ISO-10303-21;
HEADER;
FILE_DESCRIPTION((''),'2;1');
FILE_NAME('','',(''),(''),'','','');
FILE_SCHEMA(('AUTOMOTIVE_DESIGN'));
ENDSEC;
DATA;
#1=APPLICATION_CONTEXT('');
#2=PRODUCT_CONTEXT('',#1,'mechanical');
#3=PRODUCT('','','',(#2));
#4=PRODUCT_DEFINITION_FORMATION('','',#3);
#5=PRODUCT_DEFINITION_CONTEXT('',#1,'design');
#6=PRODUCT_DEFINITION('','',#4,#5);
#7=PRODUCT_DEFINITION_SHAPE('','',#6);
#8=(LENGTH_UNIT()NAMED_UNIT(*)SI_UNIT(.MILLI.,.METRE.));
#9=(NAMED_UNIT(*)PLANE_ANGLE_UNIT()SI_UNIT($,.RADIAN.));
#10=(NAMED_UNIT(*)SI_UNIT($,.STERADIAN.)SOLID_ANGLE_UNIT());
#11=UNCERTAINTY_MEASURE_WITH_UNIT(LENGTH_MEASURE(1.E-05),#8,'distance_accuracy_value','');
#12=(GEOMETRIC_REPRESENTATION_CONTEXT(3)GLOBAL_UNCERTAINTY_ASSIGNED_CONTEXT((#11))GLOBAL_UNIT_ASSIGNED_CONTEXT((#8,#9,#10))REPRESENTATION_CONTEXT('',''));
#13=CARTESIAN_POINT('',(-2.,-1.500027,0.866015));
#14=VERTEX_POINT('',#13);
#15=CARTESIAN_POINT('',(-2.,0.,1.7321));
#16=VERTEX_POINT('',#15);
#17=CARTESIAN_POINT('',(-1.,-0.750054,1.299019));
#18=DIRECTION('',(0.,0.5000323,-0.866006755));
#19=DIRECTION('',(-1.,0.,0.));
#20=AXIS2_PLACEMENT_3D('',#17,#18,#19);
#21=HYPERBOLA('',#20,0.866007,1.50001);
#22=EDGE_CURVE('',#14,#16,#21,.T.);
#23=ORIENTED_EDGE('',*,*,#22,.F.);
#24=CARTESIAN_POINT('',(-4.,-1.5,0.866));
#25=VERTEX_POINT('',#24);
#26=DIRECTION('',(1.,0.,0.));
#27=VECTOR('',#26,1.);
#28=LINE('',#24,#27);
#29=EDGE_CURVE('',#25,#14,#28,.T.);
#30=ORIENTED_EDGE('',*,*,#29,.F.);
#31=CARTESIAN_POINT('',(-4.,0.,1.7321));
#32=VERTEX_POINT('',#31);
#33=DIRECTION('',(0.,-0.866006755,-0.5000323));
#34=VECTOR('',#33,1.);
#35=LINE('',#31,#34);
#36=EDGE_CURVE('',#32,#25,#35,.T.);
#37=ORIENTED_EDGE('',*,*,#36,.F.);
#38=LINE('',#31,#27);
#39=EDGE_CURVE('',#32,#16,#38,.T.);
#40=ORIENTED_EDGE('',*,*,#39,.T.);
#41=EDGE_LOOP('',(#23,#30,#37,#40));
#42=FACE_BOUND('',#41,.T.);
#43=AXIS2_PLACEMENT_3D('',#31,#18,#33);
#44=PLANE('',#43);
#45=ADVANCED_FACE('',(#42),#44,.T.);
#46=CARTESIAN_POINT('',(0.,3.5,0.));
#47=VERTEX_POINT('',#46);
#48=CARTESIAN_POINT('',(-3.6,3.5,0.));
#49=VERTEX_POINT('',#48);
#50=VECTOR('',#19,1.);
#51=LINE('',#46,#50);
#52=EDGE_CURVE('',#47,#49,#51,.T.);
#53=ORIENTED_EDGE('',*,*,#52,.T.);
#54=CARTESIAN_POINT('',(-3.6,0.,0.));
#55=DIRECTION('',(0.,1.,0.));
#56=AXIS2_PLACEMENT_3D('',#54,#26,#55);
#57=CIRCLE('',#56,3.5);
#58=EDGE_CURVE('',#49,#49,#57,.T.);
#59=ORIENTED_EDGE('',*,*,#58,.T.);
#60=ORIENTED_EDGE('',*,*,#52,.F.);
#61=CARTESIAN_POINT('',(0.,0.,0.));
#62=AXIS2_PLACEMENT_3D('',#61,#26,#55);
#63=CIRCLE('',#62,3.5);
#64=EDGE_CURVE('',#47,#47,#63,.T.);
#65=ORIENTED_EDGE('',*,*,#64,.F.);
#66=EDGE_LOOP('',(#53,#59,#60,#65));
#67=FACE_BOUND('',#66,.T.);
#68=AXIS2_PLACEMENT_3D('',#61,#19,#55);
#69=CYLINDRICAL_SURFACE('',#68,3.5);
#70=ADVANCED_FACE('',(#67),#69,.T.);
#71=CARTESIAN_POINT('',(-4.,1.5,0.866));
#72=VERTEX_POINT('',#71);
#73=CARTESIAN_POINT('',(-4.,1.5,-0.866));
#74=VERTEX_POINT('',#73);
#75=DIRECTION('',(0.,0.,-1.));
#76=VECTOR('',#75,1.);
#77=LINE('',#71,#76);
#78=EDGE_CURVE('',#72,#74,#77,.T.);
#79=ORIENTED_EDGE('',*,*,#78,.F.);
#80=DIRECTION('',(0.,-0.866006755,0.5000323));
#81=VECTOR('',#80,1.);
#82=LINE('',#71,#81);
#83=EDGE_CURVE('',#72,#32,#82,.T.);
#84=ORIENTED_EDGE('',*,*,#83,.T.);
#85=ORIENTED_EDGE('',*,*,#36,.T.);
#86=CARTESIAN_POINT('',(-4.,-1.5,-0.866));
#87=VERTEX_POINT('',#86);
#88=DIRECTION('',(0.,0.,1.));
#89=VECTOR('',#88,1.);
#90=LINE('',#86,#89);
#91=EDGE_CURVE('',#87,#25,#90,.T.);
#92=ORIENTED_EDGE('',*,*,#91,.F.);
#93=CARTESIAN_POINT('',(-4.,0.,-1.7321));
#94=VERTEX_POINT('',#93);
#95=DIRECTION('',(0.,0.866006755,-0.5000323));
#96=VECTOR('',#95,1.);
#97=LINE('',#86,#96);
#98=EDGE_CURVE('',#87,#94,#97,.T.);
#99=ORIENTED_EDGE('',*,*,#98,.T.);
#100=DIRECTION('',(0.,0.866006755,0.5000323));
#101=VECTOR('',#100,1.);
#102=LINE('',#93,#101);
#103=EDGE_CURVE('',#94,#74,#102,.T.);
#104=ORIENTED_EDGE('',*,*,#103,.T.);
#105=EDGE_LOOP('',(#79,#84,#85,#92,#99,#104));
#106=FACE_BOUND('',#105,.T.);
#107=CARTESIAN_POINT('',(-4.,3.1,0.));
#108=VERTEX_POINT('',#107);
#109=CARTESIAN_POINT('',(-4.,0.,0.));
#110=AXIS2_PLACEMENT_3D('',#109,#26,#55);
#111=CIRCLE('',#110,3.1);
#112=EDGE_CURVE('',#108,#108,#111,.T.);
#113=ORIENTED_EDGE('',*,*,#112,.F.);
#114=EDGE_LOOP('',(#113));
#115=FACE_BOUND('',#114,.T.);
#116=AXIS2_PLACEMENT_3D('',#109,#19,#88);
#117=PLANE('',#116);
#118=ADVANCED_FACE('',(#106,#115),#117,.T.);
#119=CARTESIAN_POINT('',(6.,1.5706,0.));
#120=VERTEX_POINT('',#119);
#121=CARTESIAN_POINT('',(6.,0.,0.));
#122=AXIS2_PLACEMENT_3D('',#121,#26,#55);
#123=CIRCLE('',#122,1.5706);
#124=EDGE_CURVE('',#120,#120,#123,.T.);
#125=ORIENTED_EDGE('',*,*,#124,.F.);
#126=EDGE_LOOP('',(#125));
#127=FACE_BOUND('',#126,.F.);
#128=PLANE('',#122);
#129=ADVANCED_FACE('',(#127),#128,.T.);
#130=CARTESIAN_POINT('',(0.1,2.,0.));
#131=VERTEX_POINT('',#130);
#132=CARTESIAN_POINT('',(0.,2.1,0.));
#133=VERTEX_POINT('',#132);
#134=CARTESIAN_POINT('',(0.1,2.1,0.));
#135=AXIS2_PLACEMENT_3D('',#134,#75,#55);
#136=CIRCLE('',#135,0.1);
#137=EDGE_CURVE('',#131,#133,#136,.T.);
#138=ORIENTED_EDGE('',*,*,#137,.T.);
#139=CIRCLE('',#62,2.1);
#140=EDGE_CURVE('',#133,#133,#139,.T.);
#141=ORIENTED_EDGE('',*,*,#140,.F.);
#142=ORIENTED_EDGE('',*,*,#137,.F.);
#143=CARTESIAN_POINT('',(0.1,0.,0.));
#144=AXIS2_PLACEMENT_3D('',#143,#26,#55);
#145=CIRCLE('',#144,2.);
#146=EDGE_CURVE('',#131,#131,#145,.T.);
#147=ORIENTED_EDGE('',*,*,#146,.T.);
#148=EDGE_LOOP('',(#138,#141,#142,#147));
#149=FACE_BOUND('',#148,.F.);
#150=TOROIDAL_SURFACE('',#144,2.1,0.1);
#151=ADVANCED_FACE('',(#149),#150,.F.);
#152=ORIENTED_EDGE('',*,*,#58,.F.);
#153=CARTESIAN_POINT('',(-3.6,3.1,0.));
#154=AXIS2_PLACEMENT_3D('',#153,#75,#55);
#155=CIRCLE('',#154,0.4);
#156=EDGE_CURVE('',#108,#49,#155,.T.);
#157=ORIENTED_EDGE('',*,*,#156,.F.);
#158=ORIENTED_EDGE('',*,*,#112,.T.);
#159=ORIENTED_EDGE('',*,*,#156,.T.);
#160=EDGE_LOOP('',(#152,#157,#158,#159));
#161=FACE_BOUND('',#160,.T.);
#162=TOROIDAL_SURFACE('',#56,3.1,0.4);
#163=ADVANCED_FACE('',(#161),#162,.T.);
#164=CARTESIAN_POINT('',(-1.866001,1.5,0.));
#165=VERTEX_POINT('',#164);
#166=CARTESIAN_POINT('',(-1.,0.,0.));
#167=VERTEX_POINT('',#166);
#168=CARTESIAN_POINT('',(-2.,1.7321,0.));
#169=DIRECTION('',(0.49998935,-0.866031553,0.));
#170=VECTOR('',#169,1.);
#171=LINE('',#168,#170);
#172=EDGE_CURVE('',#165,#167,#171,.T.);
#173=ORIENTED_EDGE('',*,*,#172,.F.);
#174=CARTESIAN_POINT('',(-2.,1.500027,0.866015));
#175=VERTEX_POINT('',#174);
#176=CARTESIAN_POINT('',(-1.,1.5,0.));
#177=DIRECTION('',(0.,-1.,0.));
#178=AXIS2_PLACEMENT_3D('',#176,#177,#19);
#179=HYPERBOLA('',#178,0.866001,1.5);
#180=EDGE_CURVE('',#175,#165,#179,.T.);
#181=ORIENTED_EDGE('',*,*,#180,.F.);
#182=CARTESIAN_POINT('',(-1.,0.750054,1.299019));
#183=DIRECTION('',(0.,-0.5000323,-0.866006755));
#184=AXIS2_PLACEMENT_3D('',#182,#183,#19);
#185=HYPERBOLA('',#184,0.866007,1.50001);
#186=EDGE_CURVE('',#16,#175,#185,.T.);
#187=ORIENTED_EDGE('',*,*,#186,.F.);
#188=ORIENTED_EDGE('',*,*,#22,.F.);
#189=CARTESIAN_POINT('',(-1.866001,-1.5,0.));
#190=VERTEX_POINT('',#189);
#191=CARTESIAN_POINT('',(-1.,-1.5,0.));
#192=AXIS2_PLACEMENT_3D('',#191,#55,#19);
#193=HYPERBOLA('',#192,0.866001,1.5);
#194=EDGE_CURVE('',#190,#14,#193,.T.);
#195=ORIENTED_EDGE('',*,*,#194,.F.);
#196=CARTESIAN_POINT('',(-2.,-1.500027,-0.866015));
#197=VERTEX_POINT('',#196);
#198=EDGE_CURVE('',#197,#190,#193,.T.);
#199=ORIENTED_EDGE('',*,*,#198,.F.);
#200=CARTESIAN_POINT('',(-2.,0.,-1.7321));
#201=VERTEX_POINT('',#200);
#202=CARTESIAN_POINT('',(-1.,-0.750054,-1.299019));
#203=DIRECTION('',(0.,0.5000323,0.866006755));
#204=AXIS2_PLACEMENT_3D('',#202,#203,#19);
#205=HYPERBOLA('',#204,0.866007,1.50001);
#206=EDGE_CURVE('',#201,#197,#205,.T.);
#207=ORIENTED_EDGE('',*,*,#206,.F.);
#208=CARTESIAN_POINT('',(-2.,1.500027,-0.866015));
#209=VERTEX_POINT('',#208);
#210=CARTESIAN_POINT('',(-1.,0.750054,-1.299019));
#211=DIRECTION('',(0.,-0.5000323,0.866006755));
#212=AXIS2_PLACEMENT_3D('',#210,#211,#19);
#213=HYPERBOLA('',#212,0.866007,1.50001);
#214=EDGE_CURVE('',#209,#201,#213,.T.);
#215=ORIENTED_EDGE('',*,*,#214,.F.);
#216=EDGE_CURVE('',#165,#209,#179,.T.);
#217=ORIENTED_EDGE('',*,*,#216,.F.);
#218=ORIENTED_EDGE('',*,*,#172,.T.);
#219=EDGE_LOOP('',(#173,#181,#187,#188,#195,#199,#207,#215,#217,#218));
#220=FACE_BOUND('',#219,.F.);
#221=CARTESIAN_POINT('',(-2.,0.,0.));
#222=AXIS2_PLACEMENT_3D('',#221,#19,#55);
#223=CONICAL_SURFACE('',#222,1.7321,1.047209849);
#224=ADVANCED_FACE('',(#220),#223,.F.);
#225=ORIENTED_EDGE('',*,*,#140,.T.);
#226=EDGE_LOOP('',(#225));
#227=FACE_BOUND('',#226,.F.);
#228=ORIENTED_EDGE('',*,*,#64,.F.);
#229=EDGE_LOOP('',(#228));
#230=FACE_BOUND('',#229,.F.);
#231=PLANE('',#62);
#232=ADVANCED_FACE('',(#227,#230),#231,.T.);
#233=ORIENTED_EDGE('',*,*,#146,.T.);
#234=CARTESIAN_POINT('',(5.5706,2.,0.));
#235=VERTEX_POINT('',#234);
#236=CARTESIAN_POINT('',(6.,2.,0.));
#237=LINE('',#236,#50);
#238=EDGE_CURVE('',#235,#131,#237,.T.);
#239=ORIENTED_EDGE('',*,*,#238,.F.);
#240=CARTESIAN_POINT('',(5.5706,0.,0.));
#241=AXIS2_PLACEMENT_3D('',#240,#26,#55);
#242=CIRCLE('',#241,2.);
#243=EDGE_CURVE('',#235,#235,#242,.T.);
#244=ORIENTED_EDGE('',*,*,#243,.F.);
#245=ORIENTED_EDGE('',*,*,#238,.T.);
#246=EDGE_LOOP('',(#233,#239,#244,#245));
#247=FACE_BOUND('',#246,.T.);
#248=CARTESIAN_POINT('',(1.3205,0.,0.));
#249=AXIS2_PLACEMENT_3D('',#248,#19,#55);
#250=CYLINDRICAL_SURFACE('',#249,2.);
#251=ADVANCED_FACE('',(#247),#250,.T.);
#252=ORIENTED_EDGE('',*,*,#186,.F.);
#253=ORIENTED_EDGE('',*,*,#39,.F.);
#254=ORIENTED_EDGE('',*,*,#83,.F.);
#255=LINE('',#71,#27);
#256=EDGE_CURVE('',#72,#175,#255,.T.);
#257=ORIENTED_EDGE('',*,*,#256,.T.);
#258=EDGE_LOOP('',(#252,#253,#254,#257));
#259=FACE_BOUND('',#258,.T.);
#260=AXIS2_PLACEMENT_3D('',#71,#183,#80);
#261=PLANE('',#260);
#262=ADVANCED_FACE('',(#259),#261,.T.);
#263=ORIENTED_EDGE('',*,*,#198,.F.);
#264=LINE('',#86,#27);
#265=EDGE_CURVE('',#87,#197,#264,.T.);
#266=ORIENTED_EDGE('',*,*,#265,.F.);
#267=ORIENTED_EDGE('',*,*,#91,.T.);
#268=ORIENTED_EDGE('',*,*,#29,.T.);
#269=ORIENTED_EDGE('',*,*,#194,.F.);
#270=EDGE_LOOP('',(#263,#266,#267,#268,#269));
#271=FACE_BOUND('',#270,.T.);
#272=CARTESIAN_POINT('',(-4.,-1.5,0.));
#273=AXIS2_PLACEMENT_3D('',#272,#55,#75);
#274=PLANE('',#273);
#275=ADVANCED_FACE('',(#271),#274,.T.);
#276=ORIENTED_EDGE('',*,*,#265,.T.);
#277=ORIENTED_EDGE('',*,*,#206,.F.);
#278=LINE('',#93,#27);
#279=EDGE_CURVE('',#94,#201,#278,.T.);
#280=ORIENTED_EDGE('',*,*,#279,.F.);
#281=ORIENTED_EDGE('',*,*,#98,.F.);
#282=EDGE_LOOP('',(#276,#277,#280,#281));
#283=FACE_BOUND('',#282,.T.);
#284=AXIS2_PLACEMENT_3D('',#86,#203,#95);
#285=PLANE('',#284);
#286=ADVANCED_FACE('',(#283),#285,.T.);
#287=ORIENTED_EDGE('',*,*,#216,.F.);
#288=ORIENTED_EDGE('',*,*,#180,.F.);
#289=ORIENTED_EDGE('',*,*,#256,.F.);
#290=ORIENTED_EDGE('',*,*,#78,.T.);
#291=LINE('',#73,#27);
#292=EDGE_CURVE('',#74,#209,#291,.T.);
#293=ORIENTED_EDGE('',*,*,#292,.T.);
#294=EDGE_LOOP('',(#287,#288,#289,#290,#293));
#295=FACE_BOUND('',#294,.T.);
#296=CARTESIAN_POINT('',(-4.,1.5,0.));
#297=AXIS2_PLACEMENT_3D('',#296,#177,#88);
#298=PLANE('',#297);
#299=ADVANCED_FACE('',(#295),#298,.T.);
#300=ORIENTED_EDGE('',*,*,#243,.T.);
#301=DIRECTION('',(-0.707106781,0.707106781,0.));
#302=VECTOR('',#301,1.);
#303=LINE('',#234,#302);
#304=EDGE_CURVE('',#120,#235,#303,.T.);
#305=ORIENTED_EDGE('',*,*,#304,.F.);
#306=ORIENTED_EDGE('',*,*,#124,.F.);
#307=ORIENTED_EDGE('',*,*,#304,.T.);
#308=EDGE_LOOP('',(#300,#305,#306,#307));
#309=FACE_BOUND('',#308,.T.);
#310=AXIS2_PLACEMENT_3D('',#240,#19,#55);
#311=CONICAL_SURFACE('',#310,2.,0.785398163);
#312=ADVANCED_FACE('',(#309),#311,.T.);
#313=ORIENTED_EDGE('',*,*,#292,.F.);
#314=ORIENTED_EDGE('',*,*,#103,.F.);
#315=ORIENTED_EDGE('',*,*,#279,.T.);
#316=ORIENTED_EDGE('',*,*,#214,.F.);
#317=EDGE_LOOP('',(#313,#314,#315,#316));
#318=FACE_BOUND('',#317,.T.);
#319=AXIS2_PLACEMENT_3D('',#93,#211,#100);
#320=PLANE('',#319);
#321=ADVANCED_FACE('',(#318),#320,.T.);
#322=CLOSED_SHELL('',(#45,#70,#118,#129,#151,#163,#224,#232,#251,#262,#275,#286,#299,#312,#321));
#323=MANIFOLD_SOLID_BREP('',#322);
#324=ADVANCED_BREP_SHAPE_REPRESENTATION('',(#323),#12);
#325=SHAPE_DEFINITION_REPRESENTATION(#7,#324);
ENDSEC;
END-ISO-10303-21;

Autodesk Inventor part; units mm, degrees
ref_plane "YZ Plane" through (0, 0, 0) normal (1, 0, 0) x (0, 1, 0)
ref_plane "XZ Plane" through (0, 0, 0) normal (0, 1, 0) x (-1, 0, 0)
sketch "Esquisse1" plane through (0, 0, 0) normal (0, 0, 1) x (1, 0, 0)
  line L0 (-1, 0) -> (6, 0)
  line L1 (6, 0) -> (6, 2)
  line L2 (6, 2) -> (1.75, 2)
  line L3 (1.75, 2) -> (1.3205, 2)
  line L4 (1.3205, 2) -> (0, 2)
  line L5 (0, 2) -> (0, 3.5)
  line L6 (0, 3.5) -> (-4, 3.5)
  line L7 (-4, 3.5) -> (-4, 1.7321)
  line L8 (-4, 1.7321) -> (-2, 1.7321)
  line L9 (-2, 1.7321) -> (-1, 0)
  line L10 (-6, 0) -> (8, 0) projected
  line L11 (0, -0.7) -> (0, 4.2) projected
  line L12 (1.75, 2) -> (0, 2) construction
  dimension "d1" = 4.25
  dimension "d2" = 0.4295
  dimension "d3" = 4
  dimension "d4" = 2
  dimension "d5" = 60
  dimension "d6" = 4
  dimension "d7" = 4
  dimension "d8" = 3.4641
  dimension "d9" = 7
  dimension "d26" = 6
revolve "Corps" add sketch "Esquisse1" angle 360 about axis through (-1, 0, 0) along (1, 0, 0)
sketch "Esquisse2" plane through (-4, 0, 0) normal (-1, 0, 0) x (0, 0, 1)
  circle A0 centre (0, 0) radius 1.7321 projected
  line L0 (0, -4.9) -> (0, 4.9) projected
  line L1 (-4.9, 0) -> (4.9, 0) projected
  line L2 (1.7321, 0) -> (0.866, -1.5)
  line L3 (0.866, -1.5) -> (-0.866, -1.5)
  line L4 (-0.866, -1.5) -> (-1.7321, 0)
  line L5 (-1.7321, 0) -> (-0.866, 1.5)
  line L6 (-0.866, 1.5) -> (0.866, 1.5)
  line L7 (0.866, 1.5) -> (1.7321, 0)
extrude "Rainure" add sketch "Esquisse2" against normal up to next contours L7 A0 | A0 L2 | L6 L0 A0 | A0 L0 L3 | L0 L6 A0 | A0 L3 L0 | L4 A0 | A0 L5
fillet "Congé1" radius 0.4 1 edges at (-4, -3.5, 0)
thread "Filetage" size "M4x0.7" class "6g" standard "ISO Metric profile" length 4.25
chamfer "Chanfrein1" distance 0.4294 distance2 0.4294 1 edges at (6, -2, 0) measured on face at (6, 0.556, 0.0273)
ref_plane "Work Plane1" through (29, 0, 0) normal (0, -1, 0) x (1, 0, 0)
fillet "Fillet2" radius 0.1 1 edges at (0, -2, 0)
equation "\"d30\" = R"
equation "\"d17\" = RR"
equation "\"d13\" = GEL"
equation "\"d15\" = -0.5 * SPD + 0.5 * GD"
equation "\"d16\" = GUL"
equation "\"d1\" = GEL"
equation "\"d3\" = KOH"
equation "\"d4\" = INTI"
equation "\"d6\" = GD"
equation "\"d7\" = BDM"
equation "\"d8\" = 1.1547 * SW"
equation "\"d9\" = KOD"
equation "\"d26\" = NLG"
equation "\"GD\" = 4"
equation "\"NLG\" = 6"
equation "\"GEL\" = 4.25"
equation "\"KOD\" = 7"
equation "\"KOH\" = 4"
equation "\"INTI\" = 2"
equation "\"GAL\" = 0.61345 * PTC"
equation "\"GUL\" = 0.61345 * PTC"
equation "\"BDM\" = NND"
equation "\"SW\" = 3"
equation "\"RR\" = 0.4"
equation "\"SPD\" = NND - 1.2269 * PTC"
equation "\"R\" = 0.1"
equation "\"TOA\" = 30deg"
equation "\"GD1\" = THREADDIA - 1.2269 * PTC"
equation "\"THREADDIA\" = 4"
equation "\"FAWI\" = 45deg"
equation "\"PTC\" = 0.7"
equation "\"NND\" = 4"
equation "\"E0\" = 1.155 * SW"
properties part number "ISO 4762 - M4 x 6" material "Acier inoxydable 440C"
